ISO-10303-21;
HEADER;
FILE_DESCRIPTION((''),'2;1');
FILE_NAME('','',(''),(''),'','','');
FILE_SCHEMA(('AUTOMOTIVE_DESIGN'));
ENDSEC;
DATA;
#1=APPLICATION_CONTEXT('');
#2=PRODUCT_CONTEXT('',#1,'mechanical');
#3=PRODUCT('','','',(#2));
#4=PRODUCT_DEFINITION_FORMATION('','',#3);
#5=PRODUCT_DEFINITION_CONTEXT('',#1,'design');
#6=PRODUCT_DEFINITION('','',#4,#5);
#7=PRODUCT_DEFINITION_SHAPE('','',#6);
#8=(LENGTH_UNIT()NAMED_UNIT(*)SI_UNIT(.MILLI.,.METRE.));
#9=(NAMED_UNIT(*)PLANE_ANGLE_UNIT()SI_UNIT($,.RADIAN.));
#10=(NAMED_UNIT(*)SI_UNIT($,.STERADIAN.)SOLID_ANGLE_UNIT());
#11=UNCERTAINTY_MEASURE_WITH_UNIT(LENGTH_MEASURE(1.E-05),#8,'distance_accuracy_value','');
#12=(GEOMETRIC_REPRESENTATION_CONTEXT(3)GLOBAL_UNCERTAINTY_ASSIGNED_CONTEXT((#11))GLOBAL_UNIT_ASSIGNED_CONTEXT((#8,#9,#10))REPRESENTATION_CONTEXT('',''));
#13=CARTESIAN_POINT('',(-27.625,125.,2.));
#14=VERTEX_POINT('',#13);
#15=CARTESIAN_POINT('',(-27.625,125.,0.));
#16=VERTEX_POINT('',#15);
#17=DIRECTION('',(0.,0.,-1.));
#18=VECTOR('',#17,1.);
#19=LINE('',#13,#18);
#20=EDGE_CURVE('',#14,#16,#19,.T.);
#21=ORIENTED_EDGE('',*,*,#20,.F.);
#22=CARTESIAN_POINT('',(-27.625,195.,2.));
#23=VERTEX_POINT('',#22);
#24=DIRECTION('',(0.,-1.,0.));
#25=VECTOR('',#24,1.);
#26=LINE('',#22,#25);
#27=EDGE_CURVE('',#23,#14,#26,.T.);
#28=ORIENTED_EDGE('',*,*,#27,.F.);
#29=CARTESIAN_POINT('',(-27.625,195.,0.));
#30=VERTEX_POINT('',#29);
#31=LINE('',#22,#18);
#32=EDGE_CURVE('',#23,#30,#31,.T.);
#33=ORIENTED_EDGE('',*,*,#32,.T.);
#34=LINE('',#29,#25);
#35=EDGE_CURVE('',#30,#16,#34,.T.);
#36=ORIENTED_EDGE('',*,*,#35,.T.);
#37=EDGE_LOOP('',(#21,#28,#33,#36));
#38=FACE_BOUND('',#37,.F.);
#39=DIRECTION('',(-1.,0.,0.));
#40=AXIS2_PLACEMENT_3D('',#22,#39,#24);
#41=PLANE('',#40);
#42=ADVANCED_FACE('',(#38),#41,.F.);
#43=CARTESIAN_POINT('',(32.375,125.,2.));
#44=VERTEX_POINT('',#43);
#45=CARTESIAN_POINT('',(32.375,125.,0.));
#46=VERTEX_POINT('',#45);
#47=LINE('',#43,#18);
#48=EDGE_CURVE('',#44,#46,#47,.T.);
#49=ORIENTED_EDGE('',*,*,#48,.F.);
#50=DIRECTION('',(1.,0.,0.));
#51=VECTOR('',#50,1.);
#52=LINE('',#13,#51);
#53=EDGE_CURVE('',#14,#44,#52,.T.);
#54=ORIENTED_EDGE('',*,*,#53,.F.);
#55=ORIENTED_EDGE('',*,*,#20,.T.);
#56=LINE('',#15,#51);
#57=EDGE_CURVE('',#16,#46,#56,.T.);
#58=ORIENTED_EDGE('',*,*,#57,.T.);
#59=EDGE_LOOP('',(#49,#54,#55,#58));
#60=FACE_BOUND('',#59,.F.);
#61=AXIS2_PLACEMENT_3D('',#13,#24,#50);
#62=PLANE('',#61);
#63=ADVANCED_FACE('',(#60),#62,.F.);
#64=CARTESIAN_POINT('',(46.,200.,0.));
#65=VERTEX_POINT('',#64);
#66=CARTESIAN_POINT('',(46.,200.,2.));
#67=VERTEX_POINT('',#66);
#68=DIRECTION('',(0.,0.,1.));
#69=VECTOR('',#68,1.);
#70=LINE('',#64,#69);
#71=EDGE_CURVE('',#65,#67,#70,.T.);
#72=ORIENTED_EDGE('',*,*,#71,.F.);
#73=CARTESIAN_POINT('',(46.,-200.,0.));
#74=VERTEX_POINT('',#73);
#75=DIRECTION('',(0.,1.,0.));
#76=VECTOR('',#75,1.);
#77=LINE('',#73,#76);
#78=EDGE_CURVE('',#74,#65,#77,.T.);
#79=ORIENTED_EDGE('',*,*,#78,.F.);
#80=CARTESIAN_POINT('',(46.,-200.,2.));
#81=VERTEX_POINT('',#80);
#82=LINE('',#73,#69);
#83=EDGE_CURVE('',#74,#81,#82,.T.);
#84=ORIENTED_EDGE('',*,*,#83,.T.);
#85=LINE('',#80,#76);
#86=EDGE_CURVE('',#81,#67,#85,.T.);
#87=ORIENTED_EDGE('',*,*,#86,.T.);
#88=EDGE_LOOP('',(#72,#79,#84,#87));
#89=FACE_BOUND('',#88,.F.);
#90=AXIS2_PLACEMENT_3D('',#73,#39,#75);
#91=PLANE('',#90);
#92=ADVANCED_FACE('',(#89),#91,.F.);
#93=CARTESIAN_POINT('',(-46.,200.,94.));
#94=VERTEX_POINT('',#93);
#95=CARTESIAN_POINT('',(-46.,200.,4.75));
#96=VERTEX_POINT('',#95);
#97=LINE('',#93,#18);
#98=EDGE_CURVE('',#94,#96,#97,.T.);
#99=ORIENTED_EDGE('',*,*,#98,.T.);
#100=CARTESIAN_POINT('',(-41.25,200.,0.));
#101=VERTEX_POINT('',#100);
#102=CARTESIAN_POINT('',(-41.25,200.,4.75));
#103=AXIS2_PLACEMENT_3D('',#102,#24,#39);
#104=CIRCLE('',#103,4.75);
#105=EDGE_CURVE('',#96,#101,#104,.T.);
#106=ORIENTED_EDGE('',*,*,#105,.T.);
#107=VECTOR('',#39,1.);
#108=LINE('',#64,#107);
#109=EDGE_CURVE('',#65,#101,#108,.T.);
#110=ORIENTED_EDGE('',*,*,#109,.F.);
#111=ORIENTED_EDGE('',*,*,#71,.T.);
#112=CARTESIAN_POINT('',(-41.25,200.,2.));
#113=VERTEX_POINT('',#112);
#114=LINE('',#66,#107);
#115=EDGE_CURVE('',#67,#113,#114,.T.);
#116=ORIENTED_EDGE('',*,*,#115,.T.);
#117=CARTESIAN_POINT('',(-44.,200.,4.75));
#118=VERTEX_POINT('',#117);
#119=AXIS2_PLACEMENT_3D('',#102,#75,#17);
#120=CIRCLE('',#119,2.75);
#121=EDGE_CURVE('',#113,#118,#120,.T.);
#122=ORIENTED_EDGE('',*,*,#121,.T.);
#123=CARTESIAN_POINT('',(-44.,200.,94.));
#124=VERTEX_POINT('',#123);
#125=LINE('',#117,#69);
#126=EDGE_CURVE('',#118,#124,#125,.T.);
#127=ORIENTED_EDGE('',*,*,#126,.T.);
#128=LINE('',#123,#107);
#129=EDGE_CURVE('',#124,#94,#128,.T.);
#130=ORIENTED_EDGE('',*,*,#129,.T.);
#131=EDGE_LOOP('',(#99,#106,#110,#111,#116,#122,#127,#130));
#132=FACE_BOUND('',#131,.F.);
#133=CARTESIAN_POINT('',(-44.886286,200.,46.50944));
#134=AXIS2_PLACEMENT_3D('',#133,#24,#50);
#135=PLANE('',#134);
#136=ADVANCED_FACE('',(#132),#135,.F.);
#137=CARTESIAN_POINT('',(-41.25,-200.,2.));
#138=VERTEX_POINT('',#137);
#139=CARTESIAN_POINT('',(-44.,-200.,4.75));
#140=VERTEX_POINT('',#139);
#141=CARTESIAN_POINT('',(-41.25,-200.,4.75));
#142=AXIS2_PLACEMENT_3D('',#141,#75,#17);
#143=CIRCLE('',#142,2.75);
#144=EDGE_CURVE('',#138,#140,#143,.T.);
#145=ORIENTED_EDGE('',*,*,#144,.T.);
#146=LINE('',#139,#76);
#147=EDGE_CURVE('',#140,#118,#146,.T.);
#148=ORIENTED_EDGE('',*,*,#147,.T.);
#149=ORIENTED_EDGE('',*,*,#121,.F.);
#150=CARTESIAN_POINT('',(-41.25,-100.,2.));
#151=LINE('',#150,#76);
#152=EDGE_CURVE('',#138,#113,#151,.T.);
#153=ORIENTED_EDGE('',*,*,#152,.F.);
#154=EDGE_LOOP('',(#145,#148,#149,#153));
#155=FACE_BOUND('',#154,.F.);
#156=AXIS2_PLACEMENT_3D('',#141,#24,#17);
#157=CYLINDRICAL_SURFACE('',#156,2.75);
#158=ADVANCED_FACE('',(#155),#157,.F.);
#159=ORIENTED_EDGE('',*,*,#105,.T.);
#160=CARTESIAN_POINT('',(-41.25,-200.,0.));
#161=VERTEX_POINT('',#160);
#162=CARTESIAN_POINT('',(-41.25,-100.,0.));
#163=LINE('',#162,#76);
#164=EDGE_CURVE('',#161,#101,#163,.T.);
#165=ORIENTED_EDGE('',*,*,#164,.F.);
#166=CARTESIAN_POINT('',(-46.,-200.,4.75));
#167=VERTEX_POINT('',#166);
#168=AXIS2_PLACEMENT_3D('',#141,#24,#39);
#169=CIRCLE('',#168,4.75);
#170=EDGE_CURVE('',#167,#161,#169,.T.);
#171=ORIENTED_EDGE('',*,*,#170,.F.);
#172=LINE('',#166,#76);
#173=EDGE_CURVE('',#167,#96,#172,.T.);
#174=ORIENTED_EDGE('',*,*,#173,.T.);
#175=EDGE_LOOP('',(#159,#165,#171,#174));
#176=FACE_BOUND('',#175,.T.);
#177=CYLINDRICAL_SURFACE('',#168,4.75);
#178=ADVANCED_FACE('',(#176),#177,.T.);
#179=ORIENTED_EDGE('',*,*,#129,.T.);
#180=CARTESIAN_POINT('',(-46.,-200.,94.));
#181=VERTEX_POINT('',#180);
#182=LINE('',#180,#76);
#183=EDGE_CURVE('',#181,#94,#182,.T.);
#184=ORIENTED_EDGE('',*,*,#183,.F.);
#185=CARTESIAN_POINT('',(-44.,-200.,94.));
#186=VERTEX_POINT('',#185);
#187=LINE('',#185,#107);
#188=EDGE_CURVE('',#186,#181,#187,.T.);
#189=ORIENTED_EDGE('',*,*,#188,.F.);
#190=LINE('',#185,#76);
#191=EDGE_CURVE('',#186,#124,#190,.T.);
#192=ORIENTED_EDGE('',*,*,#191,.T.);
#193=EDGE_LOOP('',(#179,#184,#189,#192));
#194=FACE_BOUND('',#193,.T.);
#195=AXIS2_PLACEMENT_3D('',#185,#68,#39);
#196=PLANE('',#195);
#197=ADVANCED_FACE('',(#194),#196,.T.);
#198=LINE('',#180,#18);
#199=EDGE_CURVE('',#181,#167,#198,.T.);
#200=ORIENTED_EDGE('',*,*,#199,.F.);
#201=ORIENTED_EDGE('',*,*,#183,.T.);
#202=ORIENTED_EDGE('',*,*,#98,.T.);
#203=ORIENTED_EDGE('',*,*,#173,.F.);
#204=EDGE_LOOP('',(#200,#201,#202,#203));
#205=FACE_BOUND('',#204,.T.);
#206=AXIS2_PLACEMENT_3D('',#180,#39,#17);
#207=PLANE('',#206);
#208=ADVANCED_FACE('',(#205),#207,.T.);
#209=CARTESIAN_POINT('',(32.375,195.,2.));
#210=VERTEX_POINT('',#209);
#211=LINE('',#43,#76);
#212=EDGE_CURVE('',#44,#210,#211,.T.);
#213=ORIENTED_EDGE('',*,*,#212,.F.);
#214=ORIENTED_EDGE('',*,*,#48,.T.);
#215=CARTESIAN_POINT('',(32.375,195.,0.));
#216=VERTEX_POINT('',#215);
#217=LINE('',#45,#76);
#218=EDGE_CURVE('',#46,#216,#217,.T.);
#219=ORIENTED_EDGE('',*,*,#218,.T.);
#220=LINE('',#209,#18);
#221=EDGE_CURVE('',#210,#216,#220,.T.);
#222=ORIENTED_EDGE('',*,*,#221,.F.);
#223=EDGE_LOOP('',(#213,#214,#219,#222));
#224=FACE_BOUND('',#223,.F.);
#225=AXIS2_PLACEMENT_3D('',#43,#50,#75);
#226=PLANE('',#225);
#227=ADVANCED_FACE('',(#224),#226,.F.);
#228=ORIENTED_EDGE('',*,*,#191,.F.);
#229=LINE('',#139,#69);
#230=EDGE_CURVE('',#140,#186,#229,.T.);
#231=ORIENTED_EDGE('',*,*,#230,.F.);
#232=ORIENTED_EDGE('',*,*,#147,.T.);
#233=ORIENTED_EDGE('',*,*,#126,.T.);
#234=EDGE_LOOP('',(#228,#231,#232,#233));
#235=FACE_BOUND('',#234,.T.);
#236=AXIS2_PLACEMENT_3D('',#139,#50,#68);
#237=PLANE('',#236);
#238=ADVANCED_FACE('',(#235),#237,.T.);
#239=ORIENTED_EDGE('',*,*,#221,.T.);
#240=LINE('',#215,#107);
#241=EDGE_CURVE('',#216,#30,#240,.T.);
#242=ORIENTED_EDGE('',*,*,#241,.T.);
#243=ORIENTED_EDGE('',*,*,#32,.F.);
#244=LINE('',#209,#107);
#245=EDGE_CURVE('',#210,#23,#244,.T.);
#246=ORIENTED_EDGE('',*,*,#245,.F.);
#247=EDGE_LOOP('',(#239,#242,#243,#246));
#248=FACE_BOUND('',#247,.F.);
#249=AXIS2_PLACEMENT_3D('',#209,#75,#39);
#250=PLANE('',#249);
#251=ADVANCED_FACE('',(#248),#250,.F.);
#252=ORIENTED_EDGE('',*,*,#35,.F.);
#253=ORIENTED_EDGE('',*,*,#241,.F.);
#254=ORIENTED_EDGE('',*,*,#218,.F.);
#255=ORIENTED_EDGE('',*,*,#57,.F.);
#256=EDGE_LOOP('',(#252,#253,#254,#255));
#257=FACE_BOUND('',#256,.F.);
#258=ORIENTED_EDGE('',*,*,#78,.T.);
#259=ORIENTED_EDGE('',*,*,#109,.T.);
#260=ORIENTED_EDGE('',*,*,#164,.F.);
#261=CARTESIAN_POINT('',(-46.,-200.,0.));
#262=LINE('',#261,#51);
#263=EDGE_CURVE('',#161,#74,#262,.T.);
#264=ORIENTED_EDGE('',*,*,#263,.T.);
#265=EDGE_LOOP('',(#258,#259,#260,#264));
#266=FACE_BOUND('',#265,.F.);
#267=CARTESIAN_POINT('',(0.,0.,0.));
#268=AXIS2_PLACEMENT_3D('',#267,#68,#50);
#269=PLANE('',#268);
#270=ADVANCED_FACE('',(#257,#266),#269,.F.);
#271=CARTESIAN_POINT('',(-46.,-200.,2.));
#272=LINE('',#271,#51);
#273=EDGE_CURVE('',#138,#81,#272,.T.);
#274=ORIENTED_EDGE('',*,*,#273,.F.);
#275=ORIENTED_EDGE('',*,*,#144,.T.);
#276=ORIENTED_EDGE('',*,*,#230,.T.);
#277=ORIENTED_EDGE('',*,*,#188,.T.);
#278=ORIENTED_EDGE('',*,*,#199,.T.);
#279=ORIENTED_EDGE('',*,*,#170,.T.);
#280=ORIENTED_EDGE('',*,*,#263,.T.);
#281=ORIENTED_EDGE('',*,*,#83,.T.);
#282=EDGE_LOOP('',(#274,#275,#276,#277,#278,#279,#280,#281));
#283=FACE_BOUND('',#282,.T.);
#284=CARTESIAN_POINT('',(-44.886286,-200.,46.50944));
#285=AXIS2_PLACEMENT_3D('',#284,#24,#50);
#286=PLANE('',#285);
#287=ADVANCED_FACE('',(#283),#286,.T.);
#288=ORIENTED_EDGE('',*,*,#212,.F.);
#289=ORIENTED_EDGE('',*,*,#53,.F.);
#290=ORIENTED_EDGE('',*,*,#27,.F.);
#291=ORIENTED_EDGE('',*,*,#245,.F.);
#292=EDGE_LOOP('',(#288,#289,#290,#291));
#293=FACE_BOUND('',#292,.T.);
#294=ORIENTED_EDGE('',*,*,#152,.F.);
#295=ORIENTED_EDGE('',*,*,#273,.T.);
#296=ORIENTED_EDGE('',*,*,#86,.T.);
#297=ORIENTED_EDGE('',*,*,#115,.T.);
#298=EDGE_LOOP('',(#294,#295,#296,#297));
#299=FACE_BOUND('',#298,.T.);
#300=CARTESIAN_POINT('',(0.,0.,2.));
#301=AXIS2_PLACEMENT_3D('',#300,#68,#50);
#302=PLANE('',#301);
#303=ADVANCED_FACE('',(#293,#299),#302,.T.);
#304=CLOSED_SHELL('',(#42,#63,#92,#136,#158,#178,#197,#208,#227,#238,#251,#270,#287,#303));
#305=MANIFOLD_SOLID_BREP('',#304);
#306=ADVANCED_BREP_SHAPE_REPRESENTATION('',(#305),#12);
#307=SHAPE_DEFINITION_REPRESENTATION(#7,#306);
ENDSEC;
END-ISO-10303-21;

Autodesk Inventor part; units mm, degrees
ref_plane "YZ Plane" through (0, 0, 0) normal (1, 0, 0) x (0, 1, 0)
ref_plane "XZ Plane" through (0, 0, 0) normal (0, 1, 0) x (-1, 0, 0)
ref_plane "XY Plane" through (0, 0, 0) normal (0, 0, 1) x (1, 0, 0)
sketch "Sketch1" plane through (0, 0, 0) normal (0, 0, 1) x (1, 0, 0)
  line L0 (-46, -200) -> (46, -200)
  line L1 (46, -200) -> (46, 200)
  line L2 (46, 200) -> (-46, 200)
  line L3 (-46, 200) -> (-46, -200)
  line L4 (-46, -200) -> (46, 200) construction
  line L5 (46, -200) -> (-46, 200) construction
  point P0 (0, 0)
  dimension "d154" = 92
  dimension "d155" = 400
extrude "Plate5" add sketch "Sketch1" along normal blind 2
sketch "Sketch7" plane through (-44, -200, 0) normal (-1, 0, 0) x (0, -1, 0)
  line L0 (-400, 0) -> (0, 0)
  line L1 (0, 0) -> (0, 94)
  line L2 (0, 94) -> (-400, 94)
  line L3 (-400, 94) -> (-400, 0)
edge flange "Flange3" height 94 angle 90 thickness 2 bend radius 2.75 thickness toward (-1, 0, 0) relief round relief width 2 relief depth 1 edges at (-46, 0, 2) wall of the first edge with corners at (-44, 200, 0) (-44, -200, 0) (-44, -200, 94) (-44, 200, 94)
bend "Bend3"
corner "Corner3"
sketch "Sketch8" plane through (0, 0, 2) normal (0, 0, 1) x (1, 0, 0)
  line L0 (46, 200) -> (46, -200) projected
  line L1 (-41.25, 200) -> (46, 200) projected
  line L2 (32.375, 195) -> (-27.625, 195)
  line L3 (-27.625, 195) -> (-27.625, 125)
  line L4 (-27.625, 125) -> (32.375, 125)
  line L5 (32.375, 125) -> (32.375, 195)
  line L6 (32.375, 195) -> (-27.625, 125) construction
  line L7 (-27.625, 195) -> (32.375, 125) construction
  point P0 (0, 0)
  point P1 (2.375, 160)
  point P2 (2.375, 200)
  dimension "d167" = 60
  dimension "d168" = 70
  dimension "d169" = 5
extrude "Cut1" cut sketch "Sketch8" against normal blind 2
properties part number "PNS 752 FDS 1200 FLANGE 2" material "Stainless Steel"
